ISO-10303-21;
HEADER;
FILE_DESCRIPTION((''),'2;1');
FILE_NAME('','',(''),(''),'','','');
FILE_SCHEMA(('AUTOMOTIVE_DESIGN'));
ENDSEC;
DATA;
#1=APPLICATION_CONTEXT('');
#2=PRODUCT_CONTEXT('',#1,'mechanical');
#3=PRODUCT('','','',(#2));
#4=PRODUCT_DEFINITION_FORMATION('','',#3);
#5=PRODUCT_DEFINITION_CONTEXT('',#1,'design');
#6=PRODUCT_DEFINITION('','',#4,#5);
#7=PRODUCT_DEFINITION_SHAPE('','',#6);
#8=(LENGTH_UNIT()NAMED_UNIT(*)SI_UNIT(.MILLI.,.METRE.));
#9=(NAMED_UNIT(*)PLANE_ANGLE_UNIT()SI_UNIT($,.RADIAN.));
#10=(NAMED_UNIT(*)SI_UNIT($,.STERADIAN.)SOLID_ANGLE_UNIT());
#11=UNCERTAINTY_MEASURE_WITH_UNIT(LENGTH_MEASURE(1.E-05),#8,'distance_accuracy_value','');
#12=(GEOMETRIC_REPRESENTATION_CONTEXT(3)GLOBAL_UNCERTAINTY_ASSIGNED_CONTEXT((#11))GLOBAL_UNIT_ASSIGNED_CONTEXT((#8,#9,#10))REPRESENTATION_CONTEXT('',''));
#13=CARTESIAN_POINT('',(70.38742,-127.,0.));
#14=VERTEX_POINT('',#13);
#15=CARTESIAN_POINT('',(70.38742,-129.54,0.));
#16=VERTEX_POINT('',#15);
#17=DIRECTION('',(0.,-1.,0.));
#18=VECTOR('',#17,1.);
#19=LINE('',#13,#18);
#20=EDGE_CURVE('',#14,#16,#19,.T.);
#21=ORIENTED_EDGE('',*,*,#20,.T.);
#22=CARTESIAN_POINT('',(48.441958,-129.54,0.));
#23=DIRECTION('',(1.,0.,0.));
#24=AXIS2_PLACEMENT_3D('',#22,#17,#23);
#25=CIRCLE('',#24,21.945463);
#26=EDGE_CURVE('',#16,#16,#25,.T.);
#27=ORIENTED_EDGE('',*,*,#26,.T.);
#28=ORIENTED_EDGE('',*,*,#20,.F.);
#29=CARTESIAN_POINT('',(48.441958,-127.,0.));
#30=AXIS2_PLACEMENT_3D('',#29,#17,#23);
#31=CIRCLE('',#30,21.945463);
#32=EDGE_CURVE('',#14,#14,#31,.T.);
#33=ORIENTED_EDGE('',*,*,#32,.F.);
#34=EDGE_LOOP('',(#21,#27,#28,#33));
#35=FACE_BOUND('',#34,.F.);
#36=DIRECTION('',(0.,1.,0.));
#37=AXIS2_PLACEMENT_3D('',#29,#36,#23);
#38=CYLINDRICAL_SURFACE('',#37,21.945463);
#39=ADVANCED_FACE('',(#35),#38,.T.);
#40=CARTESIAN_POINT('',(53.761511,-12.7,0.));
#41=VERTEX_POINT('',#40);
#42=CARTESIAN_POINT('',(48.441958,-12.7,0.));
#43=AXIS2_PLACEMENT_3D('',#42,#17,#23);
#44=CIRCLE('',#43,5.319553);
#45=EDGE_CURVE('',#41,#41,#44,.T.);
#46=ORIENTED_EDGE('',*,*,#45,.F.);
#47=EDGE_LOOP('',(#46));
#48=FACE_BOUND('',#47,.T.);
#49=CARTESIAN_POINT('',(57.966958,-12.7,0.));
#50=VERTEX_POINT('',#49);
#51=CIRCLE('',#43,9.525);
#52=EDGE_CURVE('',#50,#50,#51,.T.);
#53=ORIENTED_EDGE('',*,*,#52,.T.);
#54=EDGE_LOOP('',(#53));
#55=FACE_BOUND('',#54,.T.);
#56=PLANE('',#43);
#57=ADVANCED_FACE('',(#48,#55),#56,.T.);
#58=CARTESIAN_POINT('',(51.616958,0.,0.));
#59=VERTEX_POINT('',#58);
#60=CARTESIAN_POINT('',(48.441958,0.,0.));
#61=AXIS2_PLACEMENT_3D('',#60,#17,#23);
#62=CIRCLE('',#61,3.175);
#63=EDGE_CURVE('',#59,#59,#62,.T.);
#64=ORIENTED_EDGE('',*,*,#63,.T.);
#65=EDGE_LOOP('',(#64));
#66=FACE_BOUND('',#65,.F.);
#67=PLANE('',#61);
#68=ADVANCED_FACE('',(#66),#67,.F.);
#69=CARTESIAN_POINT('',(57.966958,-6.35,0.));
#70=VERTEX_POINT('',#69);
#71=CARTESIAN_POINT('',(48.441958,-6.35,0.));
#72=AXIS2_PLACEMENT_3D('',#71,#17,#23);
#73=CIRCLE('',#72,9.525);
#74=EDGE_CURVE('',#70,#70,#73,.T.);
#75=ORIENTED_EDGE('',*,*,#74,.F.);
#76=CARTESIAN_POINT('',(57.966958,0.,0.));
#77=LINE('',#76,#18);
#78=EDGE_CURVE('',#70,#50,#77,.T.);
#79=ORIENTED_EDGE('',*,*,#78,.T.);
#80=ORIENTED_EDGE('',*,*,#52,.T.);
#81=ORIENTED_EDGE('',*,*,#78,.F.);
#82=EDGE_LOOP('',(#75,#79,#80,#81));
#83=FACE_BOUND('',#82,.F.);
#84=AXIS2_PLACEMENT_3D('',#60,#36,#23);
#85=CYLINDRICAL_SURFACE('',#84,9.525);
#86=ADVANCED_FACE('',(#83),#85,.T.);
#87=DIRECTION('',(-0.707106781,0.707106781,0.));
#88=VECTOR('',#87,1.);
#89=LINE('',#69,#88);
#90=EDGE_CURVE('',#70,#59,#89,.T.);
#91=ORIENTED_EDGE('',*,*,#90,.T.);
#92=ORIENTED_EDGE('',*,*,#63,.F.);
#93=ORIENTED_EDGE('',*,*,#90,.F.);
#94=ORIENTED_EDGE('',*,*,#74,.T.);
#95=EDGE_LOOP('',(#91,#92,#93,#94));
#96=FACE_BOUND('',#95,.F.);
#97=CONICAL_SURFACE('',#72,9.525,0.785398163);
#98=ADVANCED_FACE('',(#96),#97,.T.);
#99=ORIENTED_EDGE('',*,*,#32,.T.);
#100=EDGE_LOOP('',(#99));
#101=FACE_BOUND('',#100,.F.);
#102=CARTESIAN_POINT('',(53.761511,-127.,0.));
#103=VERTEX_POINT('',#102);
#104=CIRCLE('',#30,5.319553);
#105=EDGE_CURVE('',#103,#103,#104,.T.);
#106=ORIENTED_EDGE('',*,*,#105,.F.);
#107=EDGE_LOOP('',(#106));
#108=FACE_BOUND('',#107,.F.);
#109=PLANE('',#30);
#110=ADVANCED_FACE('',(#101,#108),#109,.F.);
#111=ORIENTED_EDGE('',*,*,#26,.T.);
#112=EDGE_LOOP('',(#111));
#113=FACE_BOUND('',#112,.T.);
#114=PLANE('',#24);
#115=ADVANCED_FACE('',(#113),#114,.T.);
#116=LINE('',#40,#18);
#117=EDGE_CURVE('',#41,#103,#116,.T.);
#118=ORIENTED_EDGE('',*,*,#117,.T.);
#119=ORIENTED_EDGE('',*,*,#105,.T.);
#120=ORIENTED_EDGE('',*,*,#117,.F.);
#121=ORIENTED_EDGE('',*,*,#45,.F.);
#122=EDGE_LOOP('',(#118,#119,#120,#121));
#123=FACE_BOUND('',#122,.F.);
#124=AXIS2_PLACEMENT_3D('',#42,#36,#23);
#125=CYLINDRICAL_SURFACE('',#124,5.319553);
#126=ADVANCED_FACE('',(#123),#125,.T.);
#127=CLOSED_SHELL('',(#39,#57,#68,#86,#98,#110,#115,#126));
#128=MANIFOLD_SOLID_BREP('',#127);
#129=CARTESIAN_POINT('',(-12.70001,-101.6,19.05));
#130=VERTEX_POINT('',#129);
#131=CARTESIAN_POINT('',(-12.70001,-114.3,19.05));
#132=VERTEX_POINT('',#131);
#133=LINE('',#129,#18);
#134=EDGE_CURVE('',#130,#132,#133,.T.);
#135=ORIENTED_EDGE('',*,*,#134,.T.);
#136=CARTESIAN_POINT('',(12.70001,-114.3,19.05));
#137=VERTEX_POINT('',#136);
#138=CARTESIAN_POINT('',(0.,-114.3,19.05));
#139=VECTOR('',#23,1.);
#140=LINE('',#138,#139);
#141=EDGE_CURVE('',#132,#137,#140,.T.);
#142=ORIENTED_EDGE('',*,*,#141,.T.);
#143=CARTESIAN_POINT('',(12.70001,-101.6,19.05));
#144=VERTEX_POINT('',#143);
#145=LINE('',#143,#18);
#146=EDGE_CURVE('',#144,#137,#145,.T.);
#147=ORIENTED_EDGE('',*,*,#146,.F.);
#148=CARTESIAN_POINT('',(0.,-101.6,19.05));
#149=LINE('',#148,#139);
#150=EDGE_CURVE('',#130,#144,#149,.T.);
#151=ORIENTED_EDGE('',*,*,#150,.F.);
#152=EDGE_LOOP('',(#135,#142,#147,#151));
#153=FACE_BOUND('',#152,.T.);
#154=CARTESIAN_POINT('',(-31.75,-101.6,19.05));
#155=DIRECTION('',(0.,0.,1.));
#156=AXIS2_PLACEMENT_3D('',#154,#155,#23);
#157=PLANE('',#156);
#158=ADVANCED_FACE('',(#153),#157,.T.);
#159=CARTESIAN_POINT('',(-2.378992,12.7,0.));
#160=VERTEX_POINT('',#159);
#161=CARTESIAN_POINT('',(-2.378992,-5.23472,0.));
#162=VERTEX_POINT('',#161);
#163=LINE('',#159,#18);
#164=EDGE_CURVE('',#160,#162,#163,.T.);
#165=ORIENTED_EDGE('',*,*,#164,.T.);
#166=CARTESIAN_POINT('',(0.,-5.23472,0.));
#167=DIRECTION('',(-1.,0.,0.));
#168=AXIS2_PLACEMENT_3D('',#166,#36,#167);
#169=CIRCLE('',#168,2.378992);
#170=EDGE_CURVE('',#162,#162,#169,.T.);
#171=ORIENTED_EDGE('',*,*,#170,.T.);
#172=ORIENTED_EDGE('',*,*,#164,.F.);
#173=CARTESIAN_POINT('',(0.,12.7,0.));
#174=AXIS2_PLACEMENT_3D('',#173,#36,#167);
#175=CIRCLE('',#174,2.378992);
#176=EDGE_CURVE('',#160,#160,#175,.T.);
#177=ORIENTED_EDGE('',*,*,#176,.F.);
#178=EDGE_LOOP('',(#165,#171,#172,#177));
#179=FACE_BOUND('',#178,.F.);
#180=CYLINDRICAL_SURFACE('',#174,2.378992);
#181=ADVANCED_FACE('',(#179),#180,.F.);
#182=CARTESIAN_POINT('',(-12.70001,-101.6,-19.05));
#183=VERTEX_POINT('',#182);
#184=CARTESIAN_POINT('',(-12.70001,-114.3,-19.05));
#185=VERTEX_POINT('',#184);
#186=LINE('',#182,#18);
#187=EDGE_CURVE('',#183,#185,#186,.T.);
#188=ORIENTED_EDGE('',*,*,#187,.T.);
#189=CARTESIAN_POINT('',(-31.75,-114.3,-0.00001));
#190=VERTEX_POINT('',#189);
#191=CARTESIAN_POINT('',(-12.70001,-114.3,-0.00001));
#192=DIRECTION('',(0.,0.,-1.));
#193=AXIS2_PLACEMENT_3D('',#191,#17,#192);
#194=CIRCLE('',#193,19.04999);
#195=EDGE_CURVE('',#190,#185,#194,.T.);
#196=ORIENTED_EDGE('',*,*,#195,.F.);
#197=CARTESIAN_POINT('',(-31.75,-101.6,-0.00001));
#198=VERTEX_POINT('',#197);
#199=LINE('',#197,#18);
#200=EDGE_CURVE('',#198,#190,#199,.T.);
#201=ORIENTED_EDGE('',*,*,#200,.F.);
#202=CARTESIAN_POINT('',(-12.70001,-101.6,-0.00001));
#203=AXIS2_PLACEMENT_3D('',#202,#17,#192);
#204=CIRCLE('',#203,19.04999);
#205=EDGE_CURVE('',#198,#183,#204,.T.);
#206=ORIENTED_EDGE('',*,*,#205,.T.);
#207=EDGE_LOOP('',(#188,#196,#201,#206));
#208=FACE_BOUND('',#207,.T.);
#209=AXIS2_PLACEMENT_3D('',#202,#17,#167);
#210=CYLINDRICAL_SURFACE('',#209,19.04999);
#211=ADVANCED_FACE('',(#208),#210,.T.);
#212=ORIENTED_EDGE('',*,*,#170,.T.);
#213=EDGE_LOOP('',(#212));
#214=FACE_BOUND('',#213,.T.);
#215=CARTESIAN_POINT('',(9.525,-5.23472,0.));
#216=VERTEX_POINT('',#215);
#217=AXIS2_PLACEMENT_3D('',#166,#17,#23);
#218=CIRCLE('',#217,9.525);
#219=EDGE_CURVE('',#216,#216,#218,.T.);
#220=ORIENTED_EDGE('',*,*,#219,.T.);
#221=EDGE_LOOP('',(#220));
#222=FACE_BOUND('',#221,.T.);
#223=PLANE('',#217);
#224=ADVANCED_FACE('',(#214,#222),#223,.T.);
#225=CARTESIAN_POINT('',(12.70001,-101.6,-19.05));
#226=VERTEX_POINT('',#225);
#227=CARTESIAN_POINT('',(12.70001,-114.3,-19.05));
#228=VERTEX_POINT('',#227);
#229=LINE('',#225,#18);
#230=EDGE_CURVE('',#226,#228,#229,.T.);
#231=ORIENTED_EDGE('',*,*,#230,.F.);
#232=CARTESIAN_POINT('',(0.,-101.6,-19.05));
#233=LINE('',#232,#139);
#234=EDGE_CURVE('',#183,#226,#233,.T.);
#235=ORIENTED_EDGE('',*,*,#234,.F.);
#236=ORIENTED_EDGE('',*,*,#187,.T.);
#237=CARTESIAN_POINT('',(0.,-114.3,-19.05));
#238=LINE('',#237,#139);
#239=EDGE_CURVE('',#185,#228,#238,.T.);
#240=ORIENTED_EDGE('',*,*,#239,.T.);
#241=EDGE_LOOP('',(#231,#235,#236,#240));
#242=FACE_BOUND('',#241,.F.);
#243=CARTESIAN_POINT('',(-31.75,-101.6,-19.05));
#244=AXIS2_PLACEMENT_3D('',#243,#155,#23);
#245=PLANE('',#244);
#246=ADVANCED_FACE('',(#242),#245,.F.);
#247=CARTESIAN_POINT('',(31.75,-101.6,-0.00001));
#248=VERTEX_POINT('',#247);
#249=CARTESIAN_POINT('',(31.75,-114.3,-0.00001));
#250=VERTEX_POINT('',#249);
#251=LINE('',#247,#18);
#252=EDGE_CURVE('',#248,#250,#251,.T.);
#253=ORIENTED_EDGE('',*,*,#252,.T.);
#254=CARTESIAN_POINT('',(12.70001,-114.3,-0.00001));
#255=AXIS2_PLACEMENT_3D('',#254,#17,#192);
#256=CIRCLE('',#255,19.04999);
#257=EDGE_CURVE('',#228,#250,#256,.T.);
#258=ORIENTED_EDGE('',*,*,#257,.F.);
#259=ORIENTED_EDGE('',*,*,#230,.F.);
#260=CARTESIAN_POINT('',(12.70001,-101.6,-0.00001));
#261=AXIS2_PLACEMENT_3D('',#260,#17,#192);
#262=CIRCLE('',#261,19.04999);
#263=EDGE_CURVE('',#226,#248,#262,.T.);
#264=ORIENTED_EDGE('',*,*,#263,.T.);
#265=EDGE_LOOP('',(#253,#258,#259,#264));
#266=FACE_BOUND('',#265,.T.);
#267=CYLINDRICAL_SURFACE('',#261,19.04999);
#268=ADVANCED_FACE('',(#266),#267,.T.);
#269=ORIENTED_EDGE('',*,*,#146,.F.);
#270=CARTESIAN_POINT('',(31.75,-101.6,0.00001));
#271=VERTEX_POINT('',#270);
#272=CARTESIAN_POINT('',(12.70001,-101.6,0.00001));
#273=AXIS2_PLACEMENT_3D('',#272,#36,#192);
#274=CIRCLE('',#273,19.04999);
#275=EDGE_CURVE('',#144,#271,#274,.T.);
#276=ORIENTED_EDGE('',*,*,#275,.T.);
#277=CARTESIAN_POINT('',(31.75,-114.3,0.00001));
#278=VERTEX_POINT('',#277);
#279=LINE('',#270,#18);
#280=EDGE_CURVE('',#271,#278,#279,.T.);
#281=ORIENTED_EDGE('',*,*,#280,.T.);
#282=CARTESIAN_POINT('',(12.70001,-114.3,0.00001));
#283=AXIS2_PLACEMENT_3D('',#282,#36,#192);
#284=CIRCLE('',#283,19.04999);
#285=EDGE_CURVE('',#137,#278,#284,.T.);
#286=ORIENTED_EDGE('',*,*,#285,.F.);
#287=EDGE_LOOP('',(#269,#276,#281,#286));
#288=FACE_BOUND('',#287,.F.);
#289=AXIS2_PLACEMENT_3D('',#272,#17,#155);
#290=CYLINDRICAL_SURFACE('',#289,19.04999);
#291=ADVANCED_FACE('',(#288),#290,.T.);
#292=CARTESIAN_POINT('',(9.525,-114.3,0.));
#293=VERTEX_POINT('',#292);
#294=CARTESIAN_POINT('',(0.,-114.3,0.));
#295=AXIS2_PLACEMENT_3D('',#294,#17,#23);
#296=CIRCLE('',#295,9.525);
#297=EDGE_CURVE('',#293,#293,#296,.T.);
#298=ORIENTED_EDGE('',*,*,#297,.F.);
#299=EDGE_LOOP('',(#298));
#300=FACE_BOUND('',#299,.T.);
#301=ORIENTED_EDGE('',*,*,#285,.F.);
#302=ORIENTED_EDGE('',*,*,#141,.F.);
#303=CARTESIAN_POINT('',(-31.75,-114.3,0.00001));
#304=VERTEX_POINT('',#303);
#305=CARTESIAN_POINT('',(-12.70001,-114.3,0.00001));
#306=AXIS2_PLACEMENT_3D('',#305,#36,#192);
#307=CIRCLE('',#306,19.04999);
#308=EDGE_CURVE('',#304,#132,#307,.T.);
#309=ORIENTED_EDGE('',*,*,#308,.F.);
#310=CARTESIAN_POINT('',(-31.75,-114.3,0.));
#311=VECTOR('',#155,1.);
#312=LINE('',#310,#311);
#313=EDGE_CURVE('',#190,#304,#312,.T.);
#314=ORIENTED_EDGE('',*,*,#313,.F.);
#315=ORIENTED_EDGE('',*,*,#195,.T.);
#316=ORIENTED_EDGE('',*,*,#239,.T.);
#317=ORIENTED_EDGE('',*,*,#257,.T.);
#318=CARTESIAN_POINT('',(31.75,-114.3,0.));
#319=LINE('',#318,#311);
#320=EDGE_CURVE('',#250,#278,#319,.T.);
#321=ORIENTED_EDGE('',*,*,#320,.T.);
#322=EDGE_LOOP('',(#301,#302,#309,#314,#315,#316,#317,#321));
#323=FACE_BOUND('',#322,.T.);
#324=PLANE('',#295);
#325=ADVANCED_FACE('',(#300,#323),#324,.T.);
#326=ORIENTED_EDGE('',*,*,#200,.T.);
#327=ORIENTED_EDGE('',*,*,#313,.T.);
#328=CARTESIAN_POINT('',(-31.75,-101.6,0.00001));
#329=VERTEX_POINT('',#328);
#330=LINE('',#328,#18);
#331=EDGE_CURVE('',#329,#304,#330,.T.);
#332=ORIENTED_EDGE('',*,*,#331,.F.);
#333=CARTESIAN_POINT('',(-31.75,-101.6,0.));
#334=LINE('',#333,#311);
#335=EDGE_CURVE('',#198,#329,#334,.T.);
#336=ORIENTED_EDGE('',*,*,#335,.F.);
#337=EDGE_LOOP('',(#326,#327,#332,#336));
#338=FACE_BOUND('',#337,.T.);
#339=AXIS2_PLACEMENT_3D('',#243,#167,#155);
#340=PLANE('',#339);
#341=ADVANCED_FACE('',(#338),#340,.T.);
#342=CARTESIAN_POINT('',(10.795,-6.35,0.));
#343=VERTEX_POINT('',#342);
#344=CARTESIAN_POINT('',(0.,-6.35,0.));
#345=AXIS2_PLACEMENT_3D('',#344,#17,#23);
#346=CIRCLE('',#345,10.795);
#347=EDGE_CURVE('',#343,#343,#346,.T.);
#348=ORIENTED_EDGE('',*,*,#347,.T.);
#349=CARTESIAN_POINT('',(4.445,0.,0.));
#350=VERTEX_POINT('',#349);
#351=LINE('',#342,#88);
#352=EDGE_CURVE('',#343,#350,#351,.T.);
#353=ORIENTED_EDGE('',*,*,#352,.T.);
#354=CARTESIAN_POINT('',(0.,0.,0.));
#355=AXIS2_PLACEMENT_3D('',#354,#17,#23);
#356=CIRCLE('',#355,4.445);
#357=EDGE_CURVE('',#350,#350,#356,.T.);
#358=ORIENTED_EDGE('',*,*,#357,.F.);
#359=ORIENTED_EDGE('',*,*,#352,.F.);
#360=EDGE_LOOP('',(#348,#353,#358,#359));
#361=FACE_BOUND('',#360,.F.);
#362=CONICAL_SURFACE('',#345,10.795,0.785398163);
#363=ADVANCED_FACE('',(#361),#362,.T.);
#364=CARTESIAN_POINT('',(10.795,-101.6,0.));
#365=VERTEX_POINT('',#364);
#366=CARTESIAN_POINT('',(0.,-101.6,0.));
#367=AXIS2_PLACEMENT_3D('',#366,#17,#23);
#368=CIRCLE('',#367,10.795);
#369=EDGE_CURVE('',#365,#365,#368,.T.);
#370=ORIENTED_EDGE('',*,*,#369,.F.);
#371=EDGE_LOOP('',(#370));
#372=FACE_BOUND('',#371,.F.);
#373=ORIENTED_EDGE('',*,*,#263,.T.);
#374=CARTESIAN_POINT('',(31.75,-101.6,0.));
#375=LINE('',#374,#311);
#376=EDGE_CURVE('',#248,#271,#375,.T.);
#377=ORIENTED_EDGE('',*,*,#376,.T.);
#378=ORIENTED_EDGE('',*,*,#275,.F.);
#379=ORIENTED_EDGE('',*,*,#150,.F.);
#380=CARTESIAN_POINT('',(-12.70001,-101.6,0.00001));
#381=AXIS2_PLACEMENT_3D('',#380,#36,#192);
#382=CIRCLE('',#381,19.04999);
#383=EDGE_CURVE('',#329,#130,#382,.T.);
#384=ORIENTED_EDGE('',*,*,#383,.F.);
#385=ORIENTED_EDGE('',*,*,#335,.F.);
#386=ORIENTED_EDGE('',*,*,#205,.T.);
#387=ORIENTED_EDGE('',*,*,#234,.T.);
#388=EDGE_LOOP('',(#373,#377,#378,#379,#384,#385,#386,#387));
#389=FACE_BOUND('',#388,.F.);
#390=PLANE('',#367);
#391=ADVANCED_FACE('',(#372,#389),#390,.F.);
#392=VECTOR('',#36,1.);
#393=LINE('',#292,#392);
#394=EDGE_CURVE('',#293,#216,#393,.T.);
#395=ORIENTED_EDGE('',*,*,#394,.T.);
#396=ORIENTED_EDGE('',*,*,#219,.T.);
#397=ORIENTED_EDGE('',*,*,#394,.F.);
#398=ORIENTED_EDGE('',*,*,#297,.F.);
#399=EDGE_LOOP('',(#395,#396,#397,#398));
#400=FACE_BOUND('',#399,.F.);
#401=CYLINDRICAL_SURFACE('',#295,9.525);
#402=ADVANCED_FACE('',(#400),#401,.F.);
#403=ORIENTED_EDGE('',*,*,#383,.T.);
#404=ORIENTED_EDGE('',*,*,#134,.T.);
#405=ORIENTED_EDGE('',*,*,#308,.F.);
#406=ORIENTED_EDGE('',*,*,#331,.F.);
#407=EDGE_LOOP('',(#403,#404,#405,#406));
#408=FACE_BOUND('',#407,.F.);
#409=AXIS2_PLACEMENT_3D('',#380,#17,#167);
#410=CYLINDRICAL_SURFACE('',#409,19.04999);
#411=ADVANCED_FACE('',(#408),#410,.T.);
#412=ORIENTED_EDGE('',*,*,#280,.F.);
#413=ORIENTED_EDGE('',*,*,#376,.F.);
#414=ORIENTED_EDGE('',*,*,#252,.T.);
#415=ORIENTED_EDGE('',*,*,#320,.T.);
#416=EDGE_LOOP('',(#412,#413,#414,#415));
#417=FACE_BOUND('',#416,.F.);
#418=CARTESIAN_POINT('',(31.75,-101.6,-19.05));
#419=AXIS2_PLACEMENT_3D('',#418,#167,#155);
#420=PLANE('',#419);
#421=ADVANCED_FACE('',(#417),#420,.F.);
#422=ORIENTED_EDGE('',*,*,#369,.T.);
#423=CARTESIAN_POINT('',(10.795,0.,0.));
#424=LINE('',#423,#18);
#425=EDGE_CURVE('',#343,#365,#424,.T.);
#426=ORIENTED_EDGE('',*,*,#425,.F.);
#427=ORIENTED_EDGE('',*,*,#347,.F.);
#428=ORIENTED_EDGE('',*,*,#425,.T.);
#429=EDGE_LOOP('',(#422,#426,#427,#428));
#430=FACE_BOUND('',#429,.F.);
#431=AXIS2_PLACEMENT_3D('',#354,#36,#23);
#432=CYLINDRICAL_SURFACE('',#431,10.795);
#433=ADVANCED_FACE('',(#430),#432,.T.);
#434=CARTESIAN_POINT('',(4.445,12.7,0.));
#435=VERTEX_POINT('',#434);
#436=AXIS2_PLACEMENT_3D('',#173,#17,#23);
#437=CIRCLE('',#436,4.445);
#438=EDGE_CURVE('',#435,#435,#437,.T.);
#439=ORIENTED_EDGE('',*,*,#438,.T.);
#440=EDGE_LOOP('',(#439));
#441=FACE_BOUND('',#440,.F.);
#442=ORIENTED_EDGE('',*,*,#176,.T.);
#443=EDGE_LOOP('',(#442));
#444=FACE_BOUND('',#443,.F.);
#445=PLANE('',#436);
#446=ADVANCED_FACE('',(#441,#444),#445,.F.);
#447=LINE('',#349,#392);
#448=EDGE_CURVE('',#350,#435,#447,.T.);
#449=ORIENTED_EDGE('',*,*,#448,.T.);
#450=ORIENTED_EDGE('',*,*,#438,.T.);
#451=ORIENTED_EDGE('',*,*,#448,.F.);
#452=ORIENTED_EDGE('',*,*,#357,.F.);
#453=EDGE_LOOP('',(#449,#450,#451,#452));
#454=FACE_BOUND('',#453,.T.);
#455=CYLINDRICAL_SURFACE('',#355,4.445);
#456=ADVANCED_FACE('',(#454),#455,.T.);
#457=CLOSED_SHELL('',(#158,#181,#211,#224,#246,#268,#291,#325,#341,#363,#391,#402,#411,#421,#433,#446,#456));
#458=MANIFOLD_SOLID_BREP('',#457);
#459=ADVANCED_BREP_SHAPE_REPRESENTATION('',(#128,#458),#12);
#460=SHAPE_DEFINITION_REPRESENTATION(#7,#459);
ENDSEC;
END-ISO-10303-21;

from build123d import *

# Parameters (mm, degrees)
F0_R      = 10.795
F1_DEPTH  = 101.6
F2_SIZE   = 6.35
F3_DEPTH  = 12.7
F4_W      = 63.5
F4_H      = 38.1
F5_DEPTH  = 12.7
F6_R      = 19.04999
F7_R      = 9.525
F8_DEPTH  = 109.06528
F9_R      = 2.3789918441
F10_DEPTH = 87.48307
F11_DEPTH = 12.7
F0_R_2    = 9.525
F12_DEPTH = 12.7
F13_SIZE  = 6.35
F14_R     = 5.3195531206
F15_DEPTH = 114.3
F16_R     = 21.9454627566
F17_DEPTH = 2.54


# Not quite as in the source:
# - a fillet or chamfer is up to 0.001 mm smaller than in the source, because OpenCascade refuses the exact size


with BuildPart() as f1:
    # F0 (on Front) → F1 (new body)
    with BuildSketch(Plane.XZ):
        Circle(F0_R)
    extrude(amount=F1_DEPTH)

    # F2
    f2_edges = [f1.edges().sort_by_distance(p)[0] for p in [
        (-10.795, 0, 0),
    ]]
    chamfer(f2_edges, length=F2_SIZE)

    # F3 (add): a face of the model
    f3_faces = [f1.faces().sort_by_distance(p)[0] for p in [
        (0, 0, 0),
    ]]
    extrude(f3_faces, amount=F3_DEPTH)

    # F4 (on face) → F5 (join)
    with BuildSketch(Plane.XZ.offset(101.6)):
        Rectangle(F4_W, F4_H)
    extrude(amount=F5_DEPTH)

    # F6 (radius 19.05 in the source; OpenCascade refuses exactly that, so slightly less here)
    f6_edges = [f1.edges().sort_by_distance(p)[0] for p in [
        (-31.75, -107.95, 19.05),
        (31.75, -107.95, 19.05),
        (31.75, -107.95, -19.05),
        (-31.75, -107.95, -19.05),
    ]]
    fillet(f6_edges, radius=F6_R)

    # F7 (on face) → F8 (cut)
    with BuildSketch(Plane.XZ.offset(114.3)):
        Circle(F7_R)
    extrude(amount=-F8_DEPTH, mode=Mode.SUBTRACT)

    # F9 (on face) → F10 (cut)
    with BuildSketch(Plane(origin=(0, 12.7, 0), x_dir=(-1, 0, 0), z_dir=(0, 1, 0))):
        Circle(F9_R)
    extrude(amount=-F10_DEPTH, mode=Mode.SUBTRACT)


with BuildPart() as f11:
    # F0 (on Front) → F11 (new body)
    with BuildSketch(Plane.XZ):
        Circle(F0_R)
    extrude(amount=F11_DEPTH)


with BuildPart() as f12:
    # F0 (on Front) → F12 (new body)
    with BuildSketch(Plane.XZ):
        with Locations((48.4419576824, 0)):
            Circle(F0_R_2)
    extrude(amount=F12_DEPTH)

    # F13
    f13_edges = [f12.edges().sort_by_distance(p)[0] for p in [
        (38.916958, 0, 0),
    ]]
    chamfer(f13_edges, length=F13_SIZE)

    # F14 (on face) → F15 (join)
    with BuildSketch(Plane.XZ.offset(12.7)):
        with Locations((48.4419576824, 0)):
            Circle(F14_R)
    extrude(amount=F15_DEPTH)

    # F16 (on face) → F17 (join)
    with BuildSketch(Plane.XZ.offset(127)):
        with Locations((48.4419576824, 0)):
            Circle(F16_R)
    extrude(amount=F17_DEPTH)


solid = Compound([f1.part, f12.part])
